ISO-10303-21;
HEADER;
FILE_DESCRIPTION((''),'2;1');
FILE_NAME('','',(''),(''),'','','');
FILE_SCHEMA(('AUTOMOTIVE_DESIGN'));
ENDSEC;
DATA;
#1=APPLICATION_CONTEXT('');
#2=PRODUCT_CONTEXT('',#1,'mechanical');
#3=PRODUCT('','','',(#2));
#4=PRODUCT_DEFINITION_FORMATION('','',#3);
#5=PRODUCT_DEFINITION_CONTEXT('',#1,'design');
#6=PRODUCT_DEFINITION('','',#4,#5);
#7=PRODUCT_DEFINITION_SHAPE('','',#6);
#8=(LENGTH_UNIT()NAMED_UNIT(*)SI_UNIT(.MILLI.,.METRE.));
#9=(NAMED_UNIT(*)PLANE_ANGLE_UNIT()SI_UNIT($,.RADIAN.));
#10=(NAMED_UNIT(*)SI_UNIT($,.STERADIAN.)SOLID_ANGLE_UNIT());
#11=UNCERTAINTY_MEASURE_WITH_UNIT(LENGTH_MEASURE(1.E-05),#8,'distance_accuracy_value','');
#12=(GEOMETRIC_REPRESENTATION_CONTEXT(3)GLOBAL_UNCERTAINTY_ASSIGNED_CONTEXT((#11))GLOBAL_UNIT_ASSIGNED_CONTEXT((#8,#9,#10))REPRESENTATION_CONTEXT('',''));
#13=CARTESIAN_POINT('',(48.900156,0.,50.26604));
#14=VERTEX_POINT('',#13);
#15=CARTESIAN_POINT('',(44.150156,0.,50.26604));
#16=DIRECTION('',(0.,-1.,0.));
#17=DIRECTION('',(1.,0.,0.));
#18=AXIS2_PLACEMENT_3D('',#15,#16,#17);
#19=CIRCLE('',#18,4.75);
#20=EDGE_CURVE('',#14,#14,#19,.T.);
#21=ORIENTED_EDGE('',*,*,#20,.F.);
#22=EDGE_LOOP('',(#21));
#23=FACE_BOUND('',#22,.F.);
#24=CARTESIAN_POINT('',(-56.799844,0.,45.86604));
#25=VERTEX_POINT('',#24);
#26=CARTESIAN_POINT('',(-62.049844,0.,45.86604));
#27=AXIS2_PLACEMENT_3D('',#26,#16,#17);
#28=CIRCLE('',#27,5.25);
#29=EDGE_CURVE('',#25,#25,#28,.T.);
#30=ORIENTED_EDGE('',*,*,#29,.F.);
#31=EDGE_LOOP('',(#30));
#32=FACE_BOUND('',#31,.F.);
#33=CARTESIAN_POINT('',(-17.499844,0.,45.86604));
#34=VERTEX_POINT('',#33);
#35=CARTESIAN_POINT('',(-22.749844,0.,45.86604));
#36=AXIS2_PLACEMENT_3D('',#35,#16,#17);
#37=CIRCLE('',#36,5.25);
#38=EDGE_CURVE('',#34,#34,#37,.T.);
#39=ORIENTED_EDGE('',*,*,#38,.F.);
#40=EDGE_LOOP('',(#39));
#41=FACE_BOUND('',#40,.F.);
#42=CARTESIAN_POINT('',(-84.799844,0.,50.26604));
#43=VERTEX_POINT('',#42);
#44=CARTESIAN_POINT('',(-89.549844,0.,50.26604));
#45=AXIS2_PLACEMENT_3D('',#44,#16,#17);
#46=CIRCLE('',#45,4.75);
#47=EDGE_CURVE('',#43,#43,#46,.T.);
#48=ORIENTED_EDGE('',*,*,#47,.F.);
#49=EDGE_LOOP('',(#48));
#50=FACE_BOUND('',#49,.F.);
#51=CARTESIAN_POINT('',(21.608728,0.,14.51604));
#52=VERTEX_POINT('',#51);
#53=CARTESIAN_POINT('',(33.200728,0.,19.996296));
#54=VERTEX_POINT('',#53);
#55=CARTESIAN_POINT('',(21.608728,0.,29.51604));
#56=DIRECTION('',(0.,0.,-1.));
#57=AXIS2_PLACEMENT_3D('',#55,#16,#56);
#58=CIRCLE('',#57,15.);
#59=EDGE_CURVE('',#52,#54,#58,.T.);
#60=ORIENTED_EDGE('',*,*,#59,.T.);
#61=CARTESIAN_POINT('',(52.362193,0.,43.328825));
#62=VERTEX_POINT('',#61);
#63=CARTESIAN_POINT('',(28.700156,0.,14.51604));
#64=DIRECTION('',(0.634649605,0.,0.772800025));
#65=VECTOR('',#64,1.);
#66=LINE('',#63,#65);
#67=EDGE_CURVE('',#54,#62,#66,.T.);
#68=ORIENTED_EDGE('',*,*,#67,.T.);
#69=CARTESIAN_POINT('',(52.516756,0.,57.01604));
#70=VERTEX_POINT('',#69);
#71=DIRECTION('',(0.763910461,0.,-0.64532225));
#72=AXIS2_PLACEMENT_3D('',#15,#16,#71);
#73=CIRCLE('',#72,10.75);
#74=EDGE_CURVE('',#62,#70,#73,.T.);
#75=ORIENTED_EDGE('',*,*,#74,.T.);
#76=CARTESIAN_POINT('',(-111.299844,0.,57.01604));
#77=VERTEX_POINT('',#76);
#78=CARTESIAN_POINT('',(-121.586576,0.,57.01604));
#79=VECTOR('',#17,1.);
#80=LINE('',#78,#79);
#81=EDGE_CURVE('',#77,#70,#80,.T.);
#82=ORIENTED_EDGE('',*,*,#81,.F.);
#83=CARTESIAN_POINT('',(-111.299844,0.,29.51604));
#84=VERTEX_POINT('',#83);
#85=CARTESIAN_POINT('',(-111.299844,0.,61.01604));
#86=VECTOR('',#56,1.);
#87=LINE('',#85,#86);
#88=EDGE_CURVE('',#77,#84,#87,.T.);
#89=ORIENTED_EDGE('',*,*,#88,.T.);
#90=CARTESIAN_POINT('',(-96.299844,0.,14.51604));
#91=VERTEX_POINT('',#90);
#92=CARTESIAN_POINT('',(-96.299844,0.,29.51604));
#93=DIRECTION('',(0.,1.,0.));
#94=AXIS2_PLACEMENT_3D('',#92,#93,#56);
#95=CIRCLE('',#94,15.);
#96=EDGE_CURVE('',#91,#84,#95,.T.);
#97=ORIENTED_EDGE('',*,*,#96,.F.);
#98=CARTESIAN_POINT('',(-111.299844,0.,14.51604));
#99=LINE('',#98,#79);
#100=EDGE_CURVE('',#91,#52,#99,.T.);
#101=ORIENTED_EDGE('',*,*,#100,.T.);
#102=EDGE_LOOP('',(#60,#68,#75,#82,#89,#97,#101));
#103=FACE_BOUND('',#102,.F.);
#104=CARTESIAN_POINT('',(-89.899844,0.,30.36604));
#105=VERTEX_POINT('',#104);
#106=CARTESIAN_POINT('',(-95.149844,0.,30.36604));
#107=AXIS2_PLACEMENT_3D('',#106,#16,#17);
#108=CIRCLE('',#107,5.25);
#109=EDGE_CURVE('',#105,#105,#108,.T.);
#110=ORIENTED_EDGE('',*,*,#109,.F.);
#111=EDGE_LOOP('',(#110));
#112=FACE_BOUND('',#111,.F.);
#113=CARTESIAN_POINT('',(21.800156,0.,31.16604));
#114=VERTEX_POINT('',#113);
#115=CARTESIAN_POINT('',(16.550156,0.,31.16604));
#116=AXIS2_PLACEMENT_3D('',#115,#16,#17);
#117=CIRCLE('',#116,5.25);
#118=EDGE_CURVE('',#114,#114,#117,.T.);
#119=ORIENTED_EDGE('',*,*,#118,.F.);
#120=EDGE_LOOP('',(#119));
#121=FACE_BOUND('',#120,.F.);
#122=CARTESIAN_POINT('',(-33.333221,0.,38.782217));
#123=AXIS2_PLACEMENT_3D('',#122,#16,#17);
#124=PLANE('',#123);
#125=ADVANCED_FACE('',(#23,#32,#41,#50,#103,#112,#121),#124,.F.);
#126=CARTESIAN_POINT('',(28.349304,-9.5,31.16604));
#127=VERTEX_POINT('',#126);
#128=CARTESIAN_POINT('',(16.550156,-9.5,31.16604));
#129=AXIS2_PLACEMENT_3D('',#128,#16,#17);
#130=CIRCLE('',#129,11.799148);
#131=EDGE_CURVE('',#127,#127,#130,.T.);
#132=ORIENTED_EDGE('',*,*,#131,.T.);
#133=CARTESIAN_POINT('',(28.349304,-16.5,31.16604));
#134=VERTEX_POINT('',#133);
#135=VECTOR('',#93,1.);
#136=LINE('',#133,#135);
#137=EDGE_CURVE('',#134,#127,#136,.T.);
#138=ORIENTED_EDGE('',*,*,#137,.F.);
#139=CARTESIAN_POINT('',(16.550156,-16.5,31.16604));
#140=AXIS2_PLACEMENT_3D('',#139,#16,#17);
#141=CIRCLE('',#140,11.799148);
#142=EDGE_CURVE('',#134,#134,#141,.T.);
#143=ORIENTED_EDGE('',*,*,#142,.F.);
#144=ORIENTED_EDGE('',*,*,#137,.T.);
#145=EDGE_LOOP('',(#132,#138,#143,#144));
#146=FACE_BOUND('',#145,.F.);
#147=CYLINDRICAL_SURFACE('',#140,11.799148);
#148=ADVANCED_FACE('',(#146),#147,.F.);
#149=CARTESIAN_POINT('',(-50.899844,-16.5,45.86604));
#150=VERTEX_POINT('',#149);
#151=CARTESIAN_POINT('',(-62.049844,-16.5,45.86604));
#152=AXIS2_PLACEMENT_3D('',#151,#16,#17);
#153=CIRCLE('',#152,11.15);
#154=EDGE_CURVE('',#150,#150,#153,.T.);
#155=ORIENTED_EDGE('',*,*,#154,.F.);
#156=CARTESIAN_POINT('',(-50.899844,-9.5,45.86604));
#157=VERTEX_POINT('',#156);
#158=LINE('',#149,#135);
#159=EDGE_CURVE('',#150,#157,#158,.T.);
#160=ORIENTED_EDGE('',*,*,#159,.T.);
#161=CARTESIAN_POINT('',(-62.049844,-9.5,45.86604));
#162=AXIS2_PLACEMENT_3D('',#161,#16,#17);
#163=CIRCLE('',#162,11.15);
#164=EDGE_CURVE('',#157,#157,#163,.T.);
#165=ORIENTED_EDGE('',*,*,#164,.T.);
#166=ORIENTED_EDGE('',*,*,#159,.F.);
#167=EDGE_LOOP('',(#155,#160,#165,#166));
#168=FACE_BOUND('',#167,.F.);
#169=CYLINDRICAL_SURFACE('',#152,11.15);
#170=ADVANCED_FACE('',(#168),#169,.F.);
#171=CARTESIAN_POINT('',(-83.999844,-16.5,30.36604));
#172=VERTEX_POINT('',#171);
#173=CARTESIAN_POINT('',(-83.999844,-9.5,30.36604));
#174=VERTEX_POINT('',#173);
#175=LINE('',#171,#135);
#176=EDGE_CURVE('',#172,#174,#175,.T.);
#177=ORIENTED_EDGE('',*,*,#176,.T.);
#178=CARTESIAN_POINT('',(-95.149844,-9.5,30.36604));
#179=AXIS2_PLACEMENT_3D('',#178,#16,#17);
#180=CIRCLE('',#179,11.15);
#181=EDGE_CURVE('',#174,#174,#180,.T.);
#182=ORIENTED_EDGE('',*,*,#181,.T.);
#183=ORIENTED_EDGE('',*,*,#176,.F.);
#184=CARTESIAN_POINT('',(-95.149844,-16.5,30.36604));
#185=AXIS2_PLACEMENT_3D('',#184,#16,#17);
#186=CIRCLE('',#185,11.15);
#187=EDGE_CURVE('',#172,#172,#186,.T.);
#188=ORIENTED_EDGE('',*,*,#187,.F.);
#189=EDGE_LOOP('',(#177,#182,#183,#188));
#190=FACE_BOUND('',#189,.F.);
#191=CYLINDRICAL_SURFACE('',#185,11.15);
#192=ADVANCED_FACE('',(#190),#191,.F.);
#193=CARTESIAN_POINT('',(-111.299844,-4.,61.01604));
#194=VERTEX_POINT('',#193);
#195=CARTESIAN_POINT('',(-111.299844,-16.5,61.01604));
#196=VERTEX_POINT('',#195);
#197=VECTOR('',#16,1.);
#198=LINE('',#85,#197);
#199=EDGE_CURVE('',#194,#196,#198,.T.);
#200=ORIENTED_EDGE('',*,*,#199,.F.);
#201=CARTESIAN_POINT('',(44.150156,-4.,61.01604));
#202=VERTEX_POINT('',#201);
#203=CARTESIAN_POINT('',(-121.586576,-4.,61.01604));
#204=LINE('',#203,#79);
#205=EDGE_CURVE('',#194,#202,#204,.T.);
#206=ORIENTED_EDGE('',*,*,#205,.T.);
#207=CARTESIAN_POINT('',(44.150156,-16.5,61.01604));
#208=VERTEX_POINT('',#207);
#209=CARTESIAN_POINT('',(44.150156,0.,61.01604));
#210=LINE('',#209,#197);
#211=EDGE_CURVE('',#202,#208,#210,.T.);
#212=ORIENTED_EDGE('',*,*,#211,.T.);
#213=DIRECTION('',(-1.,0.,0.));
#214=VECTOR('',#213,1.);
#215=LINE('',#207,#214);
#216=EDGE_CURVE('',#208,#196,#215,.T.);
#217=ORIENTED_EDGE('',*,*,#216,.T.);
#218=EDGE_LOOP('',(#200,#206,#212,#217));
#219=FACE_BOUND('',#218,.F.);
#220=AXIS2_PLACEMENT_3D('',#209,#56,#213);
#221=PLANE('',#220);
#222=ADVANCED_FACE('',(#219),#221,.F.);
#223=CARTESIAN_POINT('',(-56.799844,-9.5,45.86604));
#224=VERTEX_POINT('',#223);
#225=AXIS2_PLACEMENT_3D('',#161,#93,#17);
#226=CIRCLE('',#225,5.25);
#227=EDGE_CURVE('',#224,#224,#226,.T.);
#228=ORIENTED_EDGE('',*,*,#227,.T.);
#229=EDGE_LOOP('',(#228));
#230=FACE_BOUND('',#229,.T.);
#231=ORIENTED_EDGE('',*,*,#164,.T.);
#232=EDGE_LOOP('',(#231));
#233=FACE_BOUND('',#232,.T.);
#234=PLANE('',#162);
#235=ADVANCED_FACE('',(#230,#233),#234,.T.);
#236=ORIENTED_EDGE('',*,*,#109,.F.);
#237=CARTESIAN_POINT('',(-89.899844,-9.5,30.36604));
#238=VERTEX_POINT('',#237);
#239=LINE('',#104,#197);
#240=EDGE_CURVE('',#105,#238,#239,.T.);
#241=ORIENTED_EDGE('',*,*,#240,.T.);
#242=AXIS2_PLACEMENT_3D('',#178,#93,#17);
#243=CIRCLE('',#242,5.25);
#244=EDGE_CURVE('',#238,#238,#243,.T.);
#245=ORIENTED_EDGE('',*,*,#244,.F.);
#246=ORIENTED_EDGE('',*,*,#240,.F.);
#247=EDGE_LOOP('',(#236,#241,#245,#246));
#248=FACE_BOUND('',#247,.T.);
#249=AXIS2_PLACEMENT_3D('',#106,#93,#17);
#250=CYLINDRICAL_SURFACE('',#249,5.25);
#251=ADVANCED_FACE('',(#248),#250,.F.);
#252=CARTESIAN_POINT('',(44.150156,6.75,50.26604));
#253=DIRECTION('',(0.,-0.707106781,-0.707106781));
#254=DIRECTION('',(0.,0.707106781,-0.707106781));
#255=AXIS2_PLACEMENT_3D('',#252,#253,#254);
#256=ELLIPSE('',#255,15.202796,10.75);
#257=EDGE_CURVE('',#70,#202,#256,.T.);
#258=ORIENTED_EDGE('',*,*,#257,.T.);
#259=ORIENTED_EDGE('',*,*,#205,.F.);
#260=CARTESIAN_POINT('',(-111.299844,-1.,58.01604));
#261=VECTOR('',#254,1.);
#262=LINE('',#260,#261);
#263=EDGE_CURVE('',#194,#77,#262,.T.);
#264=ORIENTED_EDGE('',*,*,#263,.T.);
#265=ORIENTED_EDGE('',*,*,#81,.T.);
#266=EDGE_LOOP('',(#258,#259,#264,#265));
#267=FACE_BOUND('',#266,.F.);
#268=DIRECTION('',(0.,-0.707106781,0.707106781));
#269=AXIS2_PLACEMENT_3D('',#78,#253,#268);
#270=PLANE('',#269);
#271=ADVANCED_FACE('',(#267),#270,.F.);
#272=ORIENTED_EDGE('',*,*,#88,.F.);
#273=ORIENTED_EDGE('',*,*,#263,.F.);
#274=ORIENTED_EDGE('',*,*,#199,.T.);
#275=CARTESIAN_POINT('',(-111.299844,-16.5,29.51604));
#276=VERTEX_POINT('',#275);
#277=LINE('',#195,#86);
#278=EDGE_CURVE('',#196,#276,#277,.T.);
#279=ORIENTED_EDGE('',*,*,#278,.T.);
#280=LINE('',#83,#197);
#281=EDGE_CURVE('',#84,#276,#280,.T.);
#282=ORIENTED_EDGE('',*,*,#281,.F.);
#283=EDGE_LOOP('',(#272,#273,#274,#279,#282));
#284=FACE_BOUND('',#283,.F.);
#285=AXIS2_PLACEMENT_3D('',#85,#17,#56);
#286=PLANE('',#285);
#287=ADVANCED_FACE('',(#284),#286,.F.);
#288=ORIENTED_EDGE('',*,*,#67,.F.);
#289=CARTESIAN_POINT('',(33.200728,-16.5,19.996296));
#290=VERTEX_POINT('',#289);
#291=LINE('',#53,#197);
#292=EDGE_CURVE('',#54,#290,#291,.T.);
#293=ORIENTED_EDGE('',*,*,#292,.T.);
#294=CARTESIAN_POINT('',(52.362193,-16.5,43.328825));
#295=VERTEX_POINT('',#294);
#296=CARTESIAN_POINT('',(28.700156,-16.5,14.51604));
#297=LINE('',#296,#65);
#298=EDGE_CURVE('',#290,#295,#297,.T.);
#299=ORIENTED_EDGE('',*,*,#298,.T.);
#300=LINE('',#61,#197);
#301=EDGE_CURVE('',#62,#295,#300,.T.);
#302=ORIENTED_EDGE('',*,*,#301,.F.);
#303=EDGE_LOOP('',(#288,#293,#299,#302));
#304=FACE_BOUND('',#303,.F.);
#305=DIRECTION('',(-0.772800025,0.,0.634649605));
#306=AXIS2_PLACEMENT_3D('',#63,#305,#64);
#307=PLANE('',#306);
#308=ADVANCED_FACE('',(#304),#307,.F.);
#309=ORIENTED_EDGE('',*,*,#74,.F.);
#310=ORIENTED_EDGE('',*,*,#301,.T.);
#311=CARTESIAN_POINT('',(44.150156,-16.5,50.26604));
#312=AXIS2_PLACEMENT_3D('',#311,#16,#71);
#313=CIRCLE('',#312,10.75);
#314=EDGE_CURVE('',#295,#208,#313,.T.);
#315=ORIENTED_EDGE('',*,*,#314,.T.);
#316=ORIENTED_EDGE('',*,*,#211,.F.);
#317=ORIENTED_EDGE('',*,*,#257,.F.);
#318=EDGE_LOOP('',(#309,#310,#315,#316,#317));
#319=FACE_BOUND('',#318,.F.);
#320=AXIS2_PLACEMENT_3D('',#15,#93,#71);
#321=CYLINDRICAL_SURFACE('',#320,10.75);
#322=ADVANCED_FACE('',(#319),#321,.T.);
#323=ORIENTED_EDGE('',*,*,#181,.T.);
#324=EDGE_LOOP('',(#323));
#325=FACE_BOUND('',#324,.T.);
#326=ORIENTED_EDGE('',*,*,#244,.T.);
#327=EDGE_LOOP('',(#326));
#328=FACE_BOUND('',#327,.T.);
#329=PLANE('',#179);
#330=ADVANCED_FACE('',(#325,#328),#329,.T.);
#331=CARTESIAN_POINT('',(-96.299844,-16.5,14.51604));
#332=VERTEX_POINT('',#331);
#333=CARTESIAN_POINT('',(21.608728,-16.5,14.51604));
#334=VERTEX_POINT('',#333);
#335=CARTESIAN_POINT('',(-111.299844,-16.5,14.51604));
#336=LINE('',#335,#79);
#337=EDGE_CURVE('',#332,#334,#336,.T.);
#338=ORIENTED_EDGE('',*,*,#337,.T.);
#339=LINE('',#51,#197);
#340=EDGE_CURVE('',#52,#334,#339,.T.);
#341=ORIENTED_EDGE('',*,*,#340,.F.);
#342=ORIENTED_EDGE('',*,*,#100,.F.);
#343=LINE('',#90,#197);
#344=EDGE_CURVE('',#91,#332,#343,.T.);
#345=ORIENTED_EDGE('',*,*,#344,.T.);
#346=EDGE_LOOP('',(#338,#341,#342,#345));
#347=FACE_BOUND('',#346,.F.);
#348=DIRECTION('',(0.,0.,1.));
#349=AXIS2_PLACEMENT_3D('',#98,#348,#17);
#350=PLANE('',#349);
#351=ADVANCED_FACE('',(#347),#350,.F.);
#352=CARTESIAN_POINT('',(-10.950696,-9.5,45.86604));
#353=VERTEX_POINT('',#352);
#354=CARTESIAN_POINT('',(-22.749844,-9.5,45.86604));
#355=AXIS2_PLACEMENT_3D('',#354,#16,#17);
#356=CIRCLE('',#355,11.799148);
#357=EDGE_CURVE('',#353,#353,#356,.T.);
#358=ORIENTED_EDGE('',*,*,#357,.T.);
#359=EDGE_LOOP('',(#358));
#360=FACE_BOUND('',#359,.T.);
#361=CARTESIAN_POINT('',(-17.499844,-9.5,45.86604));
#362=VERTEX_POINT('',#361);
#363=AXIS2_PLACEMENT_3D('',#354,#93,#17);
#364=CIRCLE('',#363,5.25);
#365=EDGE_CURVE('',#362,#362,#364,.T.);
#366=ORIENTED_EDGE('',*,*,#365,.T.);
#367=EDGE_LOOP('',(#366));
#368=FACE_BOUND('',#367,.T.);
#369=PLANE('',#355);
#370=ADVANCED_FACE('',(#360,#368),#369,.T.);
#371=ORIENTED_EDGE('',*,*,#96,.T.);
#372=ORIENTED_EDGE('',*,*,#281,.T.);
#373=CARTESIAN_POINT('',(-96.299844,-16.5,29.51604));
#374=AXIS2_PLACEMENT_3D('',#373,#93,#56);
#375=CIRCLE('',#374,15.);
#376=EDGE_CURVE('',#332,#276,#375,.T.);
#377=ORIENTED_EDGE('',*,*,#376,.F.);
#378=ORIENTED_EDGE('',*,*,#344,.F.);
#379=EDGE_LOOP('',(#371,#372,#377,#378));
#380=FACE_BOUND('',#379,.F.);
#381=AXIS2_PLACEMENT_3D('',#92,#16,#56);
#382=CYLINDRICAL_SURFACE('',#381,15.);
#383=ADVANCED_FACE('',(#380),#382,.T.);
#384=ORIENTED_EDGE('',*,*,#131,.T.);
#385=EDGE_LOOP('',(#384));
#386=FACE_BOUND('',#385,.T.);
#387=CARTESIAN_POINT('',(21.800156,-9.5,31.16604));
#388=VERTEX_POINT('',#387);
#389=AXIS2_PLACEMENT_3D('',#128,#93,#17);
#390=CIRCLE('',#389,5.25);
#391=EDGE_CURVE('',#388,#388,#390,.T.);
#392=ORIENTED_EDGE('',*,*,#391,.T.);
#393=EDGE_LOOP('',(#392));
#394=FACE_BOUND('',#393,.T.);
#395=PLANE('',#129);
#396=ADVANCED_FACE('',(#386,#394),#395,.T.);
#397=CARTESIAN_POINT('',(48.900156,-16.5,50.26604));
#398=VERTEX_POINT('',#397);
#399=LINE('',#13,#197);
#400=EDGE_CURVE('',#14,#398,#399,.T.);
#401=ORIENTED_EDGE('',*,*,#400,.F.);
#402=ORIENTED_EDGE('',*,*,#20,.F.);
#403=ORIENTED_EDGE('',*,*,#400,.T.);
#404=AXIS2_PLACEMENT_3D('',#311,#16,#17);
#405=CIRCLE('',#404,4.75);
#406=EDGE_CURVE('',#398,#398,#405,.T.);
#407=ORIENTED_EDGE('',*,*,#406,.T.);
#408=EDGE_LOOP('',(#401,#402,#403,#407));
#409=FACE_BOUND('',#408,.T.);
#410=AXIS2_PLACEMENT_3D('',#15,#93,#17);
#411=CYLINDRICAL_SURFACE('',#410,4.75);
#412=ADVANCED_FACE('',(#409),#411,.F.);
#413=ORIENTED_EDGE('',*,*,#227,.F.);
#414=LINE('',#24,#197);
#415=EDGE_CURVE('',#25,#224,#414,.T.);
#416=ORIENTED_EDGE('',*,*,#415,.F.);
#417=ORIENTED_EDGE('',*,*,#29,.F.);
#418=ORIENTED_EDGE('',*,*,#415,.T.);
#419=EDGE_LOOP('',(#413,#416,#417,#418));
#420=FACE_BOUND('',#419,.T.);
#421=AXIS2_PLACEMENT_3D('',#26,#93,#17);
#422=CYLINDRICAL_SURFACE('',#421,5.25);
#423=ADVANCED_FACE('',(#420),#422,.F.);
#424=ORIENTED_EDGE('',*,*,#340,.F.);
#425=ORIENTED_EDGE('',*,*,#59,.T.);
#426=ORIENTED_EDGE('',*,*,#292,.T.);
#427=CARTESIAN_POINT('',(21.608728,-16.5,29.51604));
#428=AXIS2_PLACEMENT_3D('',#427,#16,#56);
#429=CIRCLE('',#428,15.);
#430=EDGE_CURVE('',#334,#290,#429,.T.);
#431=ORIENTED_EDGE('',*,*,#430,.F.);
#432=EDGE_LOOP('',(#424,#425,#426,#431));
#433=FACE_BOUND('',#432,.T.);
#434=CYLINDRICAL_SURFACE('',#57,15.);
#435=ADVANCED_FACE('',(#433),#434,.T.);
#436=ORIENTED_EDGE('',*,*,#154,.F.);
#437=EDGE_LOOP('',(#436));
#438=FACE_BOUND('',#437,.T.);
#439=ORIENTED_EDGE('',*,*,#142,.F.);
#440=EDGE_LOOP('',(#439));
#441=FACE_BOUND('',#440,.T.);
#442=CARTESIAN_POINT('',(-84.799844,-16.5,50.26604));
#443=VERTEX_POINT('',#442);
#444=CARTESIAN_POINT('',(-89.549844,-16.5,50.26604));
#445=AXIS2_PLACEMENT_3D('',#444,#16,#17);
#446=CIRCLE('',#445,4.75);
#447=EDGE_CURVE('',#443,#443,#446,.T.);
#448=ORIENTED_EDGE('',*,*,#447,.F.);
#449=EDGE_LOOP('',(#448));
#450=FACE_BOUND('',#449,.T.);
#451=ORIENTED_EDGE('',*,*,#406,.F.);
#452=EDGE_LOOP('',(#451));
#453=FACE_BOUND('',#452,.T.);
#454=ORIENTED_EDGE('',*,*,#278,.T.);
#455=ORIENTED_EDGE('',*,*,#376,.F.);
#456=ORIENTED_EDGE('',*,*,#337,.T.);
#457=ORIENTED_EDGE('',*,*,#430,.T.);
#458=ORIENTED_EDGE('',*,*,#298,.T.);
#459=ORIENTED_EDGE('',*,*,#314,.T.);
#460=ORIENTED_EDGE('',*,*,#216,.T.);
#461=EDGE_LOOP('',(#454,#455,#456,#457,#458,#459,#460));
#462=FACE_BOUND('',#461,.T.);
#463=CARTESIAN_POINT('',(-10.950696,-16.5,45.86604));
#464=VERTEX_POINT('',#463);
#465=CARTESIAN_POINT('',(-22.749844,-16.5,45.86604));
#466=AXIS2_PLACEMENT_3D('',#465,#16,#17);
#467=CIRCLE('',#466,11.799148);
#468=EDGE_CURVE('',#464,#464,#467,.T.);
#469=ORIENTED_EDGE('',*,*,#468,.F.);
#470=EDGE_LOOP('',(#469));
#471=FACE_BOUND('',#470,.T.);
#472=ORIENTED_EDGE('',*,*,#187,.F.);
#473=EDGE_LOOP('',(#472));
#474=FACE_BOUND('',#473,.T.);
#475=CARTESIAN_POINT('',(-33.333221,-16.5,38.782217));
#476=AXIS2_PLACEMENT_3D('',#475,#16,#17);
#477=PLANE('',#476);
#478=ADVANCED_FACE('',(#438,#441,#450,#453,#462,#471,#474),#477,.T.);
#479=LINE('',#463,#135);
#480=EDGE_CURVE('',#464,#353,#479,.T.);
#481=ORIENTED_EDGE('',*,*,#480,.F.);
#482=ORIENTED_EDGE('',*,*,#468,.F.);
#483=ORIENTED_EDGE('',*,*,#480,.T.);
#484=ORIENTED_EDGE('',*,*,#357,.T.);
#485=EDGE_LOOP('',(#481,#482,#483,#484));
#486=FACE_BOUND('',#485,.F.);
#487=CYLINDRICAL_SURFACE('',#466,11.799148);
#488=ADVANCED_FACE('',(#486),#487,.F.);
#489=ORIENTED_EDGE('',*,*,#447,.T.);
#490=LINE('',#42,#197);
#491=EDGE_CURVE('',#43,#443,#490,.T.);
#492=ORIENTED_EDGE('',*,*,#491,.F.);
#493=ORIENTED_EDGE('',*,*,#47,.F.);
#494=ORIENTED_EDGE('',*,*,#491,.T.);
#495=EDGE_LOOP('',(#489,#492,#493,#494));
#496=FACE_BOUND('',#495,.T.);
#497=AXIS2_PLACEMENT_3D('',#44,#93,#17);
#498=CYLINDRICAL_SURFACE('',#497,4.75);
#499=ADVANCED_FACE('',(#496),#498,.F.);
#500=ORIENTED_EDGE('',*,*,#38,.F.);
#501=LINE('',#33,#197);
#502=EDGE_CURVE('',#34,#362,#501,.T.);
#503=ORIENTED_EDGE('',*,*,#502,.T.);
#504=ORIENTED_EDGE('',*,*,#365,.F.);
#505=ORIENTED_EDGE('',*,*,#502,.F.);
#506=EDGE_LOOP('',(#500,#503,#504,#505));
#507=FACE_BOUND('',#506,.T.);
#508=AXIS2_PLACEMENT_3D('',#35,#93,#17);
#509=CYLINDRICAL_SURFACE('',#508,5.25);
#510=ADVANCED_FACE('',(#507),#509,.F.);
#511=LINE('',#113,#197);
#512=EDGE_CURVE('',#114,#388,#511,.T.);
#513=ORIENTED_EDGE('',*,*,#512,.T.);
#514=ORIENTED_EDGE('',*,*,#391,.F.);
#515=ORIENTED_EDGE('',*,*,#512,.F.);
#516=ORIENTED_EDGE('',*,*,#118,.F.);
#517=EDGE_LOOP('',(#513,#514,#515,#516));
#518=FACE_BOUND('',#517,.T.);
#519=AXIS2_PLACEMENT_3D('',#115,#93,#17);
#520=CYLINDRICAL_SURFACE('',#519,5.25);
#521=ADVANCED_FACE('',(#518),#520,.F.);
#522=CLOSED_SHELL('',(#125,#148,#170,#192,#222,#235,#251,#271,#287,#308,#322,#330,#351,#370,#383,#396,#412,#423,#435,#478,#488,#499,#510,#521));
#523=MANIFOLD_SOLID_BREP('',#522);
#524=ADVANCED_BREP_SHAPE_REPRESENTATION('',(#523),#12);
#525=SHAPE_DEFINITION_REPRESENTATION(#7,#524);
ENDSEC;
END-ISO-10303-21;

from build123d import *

# Parameters (mm, degrees)
F0_R        = 5.25
F0_R_2      = 4.75
F1_DEPTH    = 16.5
F2_R        = 11.15
F2_R_2      = 11.7991480977
F3_DEPTH    = 7
F4_R        = 15
F5_R        = 15
F6_T1_DEPTH = 176.0234639037


# Not quite as in the source:
# - a fillet or chamfer that OpenCascade refuses, or shapes differently, is made with other operations: its cross-section is extruded or revolved along the edge and cut away or added


with BuildPart() as f1:
    # F0 (on Front) → F1 (new body)
    with BuildSketch(Plane.XZ):
        with BuildLine():
            Line((28.7001559958, 61.0160396297), (-111.2998440042, 61.0160396297))
            Line((-111.2998440042, 61.0160396297), (-111.2998440042, 14.5160396297))
            Line((-111.2998440042, 14.5160396297), (28.7001559958, 14.5160396297))
            Line((28.7001559958, 14.5160396297), (52.362193456, 43.3288254373))
            ThreePointArc((52.362193456, 43.3288254373), (53.9004778512, 54.793039046), (44.1501559958, 61.0160396297))
            Line((44.1501559958, 61.0160396297), (28.7001559958, 61.0160396297))
        make_face()
        with Locations((-95.1498440042, 30.3660396297)):
            Circle(F0_R, mode=Mode.SUBTRACT)
        with Locations((16.5501559958, 31.1660396297)):
            Circle(F0_R, mode=Mode.SUBTRACT)
        with Locations((-62.0498440042, 45.8660396297)):
            Circle(F0_R, mode=Mode.SUBTRACT)
        with Locations((-89.5498440042, 50.2660396297)):
            Circle(F0_R_2, mode=Mode.SUBTRACT)
        with Locations((-22.7498440042, 45.8660396297)):
            Circle(F0_R, mode=Mode.SUBTRACT)
        with Locations((44.1501559958, 50.2660396297)):
            Circle(F0_R_2, mode=Mode.SUBTRACT)
    extrude(amount=F1_DEPTH)

    # F2 (on face) → F3 (cut)
    with BuildSketch(Plane.XZ.offset(16.5)):
        with Locations((-95.1498440042, 30.3660396297)):
            Circle(F2_R)
        with Locations((-62.0498440042, 45.8660396297)):
            Circle(F2_R)
        with Locations((-22.7498440042, 45.8660396297)):
            Circle(F2_R_2)
        with Locations((16.5501559958, 31.1660396297)):
            Circle(F2_R_2)
    extrude(amount=-F3_DEPTH, mode=Mode.SUBTRACT)

    # F4
    f4_edges = [f1.edges().sort_by_distance(p)[0] for p in [
        (28.700156, -8.25, 14.51604),
    ]]
    fillet(f4_edges, radius=F4_R)

    # F5
    f5_edges = [f1.edges().sort_by_distance(p)[0] for p in [
        (-111.299844, -8.25, 14.51604),
    ]]
    fillet(f5_edges, radius=F5_R)

    # F6: chamfer of 4 on 1 edges, made by hand

    # F6_s2 → F6_t1 (cut)
    with BuildSketch(Plane.YZ.offset(-121.5865759561)):
        Polygon((0, 57.0160396297), (-4, 61.0160396297), (0, 61.0160396297), align=None)
    extrude(amount=F6_T1_DEPTH, mode=Mode.SUBTRACT)


solid = f1.part
